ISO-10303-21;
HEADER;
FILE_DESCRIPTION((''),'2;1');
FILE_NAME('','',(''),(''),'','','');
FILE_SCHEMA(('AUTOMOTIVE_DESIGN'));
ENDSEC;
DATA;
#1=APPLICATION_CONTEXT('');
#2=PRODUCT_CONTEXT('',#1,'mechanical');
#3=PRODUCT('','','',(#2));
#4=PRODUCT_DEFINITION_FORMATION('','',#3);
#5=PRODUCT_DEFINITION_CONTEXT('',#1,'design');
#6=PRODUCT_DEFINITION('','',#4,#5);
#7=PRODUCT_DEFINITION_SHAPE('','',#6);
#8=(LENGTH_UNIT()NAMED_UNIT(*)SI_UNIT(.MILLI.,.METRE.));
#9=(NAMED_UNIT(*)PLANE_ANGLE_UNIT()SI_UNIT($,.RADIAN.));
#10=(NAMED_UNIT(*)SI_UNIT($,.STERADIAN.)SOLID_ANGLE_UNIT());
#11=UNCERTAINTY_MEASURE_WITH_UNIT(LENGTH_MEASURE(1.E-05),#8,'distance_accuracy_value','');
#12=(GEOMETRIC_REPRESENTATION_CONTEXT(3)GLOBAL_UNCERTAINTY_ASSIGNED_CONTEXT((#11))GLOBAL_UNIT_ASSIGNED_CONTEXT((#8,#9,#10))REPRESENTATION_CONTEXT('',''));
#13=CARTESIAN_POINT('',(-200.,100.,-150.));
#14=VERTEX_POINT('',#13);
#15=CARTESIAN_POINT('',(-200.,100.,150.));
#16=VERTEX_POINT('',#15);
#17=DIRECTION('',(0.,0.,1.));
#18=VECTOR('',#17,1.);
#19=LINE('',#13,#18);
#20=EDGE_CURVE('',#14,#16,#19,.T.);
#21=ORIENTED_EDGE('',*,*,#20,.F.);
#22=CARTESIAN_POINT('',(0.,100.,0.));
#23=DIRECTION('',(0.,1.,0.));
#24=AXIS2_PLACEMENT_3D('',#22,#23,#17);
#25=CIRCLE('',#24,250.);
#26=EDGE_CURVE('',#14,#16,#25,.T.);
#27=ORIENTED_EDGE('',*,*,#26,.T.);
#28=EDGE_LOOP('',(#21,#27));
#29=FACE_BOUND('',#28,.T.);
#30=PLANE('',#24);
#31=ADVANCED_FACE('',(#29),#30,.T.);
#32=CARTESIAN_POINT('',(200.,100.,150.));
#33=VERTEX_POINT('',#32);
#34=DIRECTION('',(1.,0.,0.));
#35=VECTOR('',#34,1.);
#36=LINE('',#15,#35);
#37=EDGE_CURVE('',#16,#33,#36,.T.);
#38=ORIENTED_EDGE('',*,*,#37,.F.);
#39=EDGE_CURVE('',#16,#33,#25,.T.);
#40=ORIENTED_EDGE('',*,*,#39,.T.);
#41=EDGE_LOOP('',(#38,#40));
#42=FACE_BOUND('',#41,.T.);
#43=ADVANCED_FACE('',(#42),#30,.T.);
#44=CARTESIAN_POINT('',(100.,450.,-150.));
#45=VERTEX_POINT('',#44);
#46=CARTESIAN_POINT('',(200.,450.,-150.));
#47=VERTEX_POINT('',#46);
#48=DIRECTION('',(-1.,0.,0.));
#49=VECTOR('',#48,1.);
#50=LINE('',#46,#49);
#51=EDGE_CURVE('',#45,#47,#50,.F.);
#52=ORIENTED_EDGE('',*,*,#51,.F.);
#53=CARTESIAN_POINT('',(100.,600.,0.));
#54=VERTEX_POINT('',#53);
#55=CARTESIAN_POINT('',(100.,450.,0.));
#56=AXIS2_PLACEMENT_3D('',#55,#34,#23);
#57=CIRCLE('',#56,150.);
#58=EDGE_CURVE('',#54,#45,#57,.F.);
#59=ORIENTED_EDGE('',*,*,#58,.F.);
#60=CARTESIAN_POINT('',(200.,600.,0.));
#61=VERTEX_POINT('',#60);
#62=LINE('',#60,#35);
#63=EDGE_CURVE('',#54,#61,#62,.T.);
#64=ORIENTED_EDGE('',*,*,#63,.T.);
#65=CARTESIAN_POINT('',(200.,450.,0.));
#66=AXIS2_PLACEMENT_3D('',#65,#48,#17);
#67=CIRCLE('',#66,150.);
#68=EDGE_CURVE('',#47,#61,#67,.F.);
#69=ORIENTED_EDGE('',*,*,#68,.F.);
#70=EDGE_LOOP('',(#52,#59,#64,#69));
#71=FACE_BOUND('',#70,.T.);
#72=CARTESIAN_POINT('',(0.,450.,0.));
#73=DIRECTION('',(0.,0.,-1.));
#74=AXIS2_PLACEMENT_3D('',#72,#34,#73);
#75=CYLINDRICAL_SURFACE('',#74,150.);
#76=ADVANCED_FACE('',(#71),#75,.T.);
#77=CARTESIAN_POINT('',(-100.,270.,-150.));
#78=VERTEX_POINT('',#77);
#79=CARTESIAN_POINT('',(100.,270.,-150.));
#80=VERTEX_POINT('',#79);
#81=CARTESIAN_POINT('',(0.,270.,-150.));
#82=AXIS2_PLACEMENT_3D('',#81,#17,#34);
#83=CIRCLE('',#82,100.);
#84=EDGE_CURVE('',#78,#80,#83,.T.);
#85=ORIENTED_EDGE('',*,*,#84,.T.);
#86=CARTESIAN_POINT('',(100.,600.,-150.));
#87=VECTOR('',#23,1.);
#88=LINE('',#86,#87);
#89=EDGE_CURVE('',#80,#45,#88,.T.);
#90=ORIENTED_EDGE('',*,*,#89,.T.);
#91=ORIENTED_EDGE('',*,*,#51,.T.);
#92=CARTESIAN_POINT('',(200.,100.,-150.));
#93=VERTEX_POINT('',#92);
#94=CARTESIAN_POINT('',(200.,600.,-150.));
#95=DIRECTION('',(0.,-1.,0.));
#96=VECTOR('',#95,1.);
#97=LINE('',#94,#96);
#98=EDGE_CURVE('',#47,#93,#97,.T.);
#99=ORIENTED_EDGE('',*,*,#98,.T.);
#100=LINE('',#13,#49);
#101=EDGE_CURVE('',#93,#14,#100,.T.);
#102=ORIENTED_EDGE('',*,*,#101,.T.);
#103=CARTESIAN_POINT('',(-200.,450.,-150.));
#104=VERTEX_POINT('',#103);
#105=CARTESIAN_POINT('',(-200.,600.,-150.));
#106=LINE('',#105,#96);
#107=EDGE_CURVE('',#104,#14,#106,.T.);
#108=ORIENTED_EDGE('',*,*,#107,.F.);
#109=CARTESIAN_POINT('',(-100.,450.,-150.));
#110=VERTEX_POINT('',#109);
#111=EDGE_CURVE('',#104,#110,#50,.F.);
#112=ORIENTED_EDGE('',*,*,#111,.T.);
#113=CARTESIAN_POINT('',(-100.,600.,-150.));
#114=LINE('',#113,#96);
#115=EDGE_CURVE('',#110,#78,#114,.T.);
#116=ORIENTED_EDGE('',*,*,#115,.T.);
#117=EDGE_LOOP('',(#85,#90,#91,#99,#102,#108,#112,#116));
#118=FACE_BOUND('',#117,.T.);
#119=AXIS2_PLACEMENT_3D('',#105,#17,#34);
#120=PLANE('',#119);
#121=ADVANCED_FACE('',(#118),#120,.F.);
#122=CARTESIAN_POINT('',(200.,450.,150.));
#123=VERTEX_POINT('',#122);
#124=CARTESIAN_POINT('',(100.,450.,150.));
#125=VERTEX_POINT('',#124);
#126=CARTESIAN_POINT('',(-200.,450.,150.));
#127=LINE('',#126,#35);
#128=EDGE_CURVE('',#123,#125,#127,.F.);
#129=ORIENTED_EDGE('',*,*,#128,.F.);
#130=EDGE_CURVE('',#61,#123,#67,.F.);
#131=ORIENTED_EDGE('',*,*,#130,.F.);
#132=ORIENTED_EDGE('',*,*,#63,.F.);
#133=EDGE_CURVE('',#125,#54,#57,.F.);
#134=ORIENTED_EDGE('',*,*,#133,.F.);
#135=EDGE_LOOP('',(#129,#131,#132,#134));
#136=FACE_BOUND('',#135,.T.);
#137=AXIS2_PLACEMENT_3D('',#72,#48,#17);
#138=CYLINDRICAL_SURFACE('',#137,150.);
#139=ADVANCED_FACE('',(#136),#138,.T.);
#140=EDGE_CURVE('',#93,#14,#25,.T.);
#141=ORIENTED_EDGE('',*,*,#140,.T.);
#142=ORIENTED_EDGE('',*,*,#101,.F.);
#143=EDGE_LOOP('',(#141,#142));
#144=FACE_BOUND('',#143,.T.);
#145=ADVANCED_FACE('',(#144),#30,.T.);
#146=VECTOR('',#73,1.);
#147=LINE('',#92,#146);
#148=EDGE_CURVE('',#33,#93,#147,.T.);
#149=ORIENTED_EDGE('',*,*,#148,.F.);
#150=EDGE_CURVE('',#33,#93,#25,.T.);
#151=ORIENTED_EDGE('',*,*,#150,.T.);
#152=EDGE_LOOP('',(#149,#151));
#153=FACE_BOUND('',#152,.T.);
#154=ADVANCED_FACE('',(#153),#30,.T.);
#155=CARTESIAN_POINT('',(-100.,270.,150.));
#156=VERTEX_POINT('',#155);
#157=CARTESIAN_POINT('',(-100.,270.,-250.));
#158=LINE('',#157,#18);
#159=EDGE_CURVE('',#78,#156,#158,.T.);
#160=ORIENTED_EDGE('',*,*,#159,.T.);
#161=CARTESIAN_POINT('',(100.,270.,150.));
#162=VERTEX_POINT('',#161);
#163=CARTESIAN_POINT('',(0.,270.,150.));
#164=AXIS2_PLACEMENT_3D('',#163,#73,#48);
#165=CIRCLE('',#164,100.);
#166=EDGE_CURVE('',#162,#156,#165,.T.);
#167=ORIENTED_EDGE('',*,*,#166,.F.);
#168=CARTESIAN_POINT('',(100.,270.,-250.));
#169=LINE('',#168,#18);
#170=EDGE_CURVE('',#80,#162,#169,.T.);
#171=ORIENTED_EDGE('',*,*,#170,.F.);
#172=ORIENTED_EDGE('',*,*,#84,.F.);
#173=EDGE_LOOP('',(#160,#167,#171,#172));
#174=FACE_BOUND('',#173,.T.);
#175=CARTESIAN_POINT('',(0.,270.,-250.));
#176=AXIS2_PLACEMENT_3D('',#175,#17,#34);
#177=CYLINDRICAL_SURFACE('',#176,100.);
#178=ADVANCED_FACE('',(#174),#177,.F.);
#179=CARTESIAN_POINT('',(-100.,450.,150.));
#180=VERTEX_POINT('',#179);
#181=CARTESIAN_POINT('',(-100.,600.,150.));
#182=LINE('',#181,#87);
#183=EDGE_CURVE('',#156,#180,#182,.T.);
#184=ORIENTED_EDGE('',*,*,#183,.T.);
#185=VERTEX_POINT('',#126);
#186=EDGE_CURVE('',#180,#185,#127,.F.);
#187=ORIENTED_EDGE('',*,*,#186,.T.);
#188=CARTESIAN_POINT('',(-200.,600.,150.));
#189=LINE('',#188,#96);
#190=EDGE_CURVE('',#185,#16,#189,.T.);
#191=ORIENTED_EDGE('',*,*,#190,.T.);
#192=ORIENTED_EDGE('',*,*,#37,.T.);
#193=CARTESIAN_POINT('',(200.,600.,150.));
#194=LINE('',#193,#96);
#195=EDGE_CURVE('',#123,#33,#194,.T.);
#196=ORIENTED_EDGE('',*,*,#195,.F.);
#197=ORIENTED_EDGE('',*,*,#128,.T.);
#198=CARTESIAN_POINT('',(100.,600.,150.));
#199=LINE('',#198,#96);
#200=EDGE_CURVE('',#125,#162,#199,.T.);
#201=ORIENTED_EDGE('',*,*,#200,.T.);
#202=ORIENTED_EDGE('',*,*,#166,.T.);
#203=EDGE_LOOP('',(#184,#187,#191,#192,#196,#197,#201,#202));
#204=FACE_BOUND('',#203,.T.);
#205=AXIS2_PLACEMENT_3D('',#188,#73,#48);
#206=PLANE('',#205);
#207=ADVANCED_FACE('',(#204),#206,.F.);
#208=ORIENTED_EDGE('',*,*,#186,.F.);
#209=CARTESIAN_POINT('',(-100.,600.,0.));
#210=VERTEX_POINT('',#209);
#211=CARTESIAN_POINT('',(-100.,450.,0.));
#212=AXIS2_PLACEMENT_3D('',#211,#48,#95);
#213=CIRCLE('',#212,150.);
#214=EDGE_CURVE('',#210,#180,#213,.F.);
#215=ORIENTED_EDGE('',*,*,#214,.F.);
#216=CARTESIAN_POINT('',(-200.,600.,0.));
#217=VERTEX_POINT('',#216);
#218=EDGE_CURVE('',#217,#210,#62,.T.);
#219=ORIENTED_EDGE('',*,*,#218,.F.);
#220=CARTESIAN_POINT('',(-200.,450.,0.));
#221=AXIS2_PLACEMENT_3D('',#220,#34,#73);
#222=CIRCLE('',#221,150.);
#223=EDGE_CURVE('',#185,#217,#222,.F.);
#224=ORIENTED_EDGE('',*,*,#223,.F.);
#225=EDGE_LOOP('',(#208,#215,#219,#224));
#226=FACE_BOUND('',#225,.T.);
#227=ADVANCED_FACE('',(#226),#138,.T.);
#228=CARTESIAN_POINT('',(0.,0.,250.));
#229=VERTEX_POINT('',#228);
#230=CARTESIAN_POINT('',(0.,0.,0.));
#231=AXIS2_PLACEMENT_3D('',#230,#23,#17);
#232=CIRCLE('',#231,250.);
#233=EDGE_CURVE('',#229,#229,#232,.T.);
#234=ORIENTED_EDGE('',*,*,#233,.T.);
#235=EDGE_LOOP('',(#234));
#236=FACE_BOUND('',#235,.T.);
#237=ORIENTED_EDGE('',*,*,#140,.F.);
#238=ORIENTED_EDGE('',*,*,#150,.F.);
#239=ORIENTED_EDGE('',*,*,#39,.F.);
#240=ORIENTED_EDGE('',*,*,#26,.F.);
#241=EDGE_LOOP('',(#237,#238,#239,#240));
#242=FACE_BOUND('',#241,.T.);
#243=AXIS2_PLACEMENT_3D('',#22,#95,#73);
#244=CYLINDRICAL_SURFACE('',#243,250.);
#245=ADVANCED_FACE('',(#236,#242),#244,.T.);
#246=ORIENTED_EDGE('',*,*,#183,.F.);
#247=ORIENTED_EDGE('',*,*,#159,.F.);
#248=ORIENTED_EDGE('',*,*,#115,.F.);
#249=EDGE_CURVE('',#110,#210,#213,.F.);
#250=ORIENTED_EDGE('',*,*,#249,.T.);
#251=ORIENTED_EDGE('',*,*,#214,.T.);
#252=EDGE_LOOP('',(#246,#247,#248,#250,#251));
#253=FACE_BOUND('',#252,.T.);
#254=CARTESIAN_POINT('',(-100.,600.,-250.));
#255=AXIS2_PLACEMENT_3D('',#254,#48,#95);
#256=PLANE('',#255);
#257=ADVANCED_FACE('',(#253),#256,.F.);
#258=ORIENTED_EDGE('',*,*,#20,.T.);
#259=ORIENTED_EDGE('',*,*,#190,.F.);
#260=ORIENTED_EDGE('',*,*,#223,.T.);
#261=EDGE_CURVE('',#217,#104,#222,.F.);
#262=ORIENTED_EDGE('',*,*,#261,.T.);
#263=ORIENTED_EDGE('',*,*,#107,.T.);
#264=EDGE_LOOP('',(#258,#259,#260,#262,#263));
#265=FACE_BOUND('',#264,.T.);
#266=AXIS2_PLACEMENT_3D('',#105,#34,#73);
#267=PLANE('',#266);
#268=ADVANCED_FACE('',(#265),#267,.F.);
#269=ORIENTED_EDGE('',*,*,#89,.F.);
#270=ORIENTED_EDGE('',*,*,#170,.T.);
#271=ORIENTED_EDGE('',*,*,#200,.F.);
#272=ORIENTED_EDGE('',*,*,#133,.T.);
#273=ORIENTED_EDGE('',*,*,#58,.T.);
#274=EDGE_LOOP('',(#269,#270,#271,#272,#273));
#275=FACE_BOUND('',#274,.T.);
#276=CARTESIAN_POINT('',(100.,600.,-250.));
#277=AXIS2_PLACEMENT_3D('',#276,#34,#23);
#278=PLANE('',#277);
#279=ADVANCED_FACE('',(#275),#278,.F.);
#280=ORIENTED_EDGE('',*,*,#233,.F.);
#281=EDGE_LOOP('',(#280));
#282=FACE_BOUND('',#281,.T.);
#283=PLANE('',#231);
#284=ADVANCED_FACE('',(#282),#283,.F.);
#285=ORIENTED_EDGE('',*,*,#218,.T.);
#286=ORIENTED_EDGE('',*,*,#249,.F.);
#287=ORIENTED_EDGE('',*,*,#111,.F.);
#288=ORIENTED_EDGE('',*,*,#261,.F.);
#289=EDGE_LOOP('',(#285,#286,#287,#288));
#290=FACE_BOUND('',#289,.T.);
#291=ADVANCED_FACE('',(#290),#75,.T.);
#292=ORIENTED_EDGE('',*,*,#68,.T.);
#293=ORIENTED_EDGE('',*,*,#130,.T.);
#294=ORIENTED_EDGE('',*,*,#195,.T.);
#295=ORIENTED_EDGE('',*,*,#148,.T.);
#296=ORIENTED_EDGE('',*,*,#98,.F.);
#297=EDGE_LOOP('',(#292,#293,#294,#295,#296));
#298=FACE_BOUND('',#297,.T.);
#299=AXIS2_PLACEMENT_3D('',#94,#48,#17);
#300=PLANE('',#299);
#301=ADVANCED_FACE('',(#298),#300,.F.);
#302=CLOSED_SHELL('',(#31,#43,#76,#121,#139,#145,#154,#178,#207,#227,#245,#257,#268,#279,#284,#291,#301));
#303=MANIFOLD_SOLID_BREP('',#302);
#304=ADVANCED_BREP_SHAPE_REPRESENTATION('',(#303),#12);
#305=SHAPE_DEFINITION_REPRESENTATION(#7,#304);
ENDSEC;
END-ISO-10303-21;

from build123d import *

# Parameters (mm, degrees)
SKETCH_1_R          = 250
EXTRUDE_1_DEPTH     = 100
SKETCH_2_W          = 400
SKETCH_2_H          = 300
EXTRUDE_2_DEPTH     = 500
FILLET_1_R          = 150
FILLET_2_R          = 150
CUT_EXTRUDE_1_DEPTH = 250
SKETCH_4_R          = 100
CUT_EXTRUDE_2_DEPTH = 250


with BuildPart() as part:
    # 草图1 → 凸台-拉伸1 (new body)
    with BuildSketch(Plane(origin=(0, 0, 0), x_dir=(1, 0, 0), z_dir=(0, 1, 0))):
        with Locations(Location((0, 0, 0), (0, 0, 270))):
            Circle(SKETCH_1_R)
    extrude(amount=EXTRUDE_1_DEPTH)

    # 草图2 → 凸台-拉伸2 (add)
    with BuildSketch(Plane(origin=(0, 100, 0), x_dir=(1, 0, 0), z_dir=(0, 1, 0))):
        Rectangle(SKETCH_2_W, SKETCH_2_H)
    extrude(amount=EXTRUDE_2_DEPTH)

    # 圆角1
    fillet_1_edges = [part.edges().sort_by_distance(p)[0] for p in [
        (0, 600, 150),
    ]]
    fillet(fillet_1_edges, radius=FILLET_1_R)

    # 圆角2
    fillet_2_edges = [part.edges().sort_by_distance(p)[0] for p in [
        (0, 600, -150),
    ]]
    fillet(fillet_2_edges, radius=FILLET_2_R - 0.0001)  # a hair under: the kernel refuses the full size

    # 草图3 → 切除-拉伸1 (cut, symmetric)
    with BuildSketch(Plane.XY):
        Polygon((0, 600), (100, 600), (100, 270), (0, 270), (-100, 270), (-100, 600), align=None)
    extrude(amount=CUT_EXTRUDE_1_DEPTH, both=True, mode=Mode.SUBTRACT)

    # 草图4 → 切除-拉伸2 (cut, symmetric)
    with BuildSketch(Plane.XY):
        with Locations((0, 270)):
            Circle(SKETCH_4_R)
    extrude(amount=CUT_EXTRUDE_2_DEPTH, both=True, mode=Mode.SUBTRACT)


solid = part.part
